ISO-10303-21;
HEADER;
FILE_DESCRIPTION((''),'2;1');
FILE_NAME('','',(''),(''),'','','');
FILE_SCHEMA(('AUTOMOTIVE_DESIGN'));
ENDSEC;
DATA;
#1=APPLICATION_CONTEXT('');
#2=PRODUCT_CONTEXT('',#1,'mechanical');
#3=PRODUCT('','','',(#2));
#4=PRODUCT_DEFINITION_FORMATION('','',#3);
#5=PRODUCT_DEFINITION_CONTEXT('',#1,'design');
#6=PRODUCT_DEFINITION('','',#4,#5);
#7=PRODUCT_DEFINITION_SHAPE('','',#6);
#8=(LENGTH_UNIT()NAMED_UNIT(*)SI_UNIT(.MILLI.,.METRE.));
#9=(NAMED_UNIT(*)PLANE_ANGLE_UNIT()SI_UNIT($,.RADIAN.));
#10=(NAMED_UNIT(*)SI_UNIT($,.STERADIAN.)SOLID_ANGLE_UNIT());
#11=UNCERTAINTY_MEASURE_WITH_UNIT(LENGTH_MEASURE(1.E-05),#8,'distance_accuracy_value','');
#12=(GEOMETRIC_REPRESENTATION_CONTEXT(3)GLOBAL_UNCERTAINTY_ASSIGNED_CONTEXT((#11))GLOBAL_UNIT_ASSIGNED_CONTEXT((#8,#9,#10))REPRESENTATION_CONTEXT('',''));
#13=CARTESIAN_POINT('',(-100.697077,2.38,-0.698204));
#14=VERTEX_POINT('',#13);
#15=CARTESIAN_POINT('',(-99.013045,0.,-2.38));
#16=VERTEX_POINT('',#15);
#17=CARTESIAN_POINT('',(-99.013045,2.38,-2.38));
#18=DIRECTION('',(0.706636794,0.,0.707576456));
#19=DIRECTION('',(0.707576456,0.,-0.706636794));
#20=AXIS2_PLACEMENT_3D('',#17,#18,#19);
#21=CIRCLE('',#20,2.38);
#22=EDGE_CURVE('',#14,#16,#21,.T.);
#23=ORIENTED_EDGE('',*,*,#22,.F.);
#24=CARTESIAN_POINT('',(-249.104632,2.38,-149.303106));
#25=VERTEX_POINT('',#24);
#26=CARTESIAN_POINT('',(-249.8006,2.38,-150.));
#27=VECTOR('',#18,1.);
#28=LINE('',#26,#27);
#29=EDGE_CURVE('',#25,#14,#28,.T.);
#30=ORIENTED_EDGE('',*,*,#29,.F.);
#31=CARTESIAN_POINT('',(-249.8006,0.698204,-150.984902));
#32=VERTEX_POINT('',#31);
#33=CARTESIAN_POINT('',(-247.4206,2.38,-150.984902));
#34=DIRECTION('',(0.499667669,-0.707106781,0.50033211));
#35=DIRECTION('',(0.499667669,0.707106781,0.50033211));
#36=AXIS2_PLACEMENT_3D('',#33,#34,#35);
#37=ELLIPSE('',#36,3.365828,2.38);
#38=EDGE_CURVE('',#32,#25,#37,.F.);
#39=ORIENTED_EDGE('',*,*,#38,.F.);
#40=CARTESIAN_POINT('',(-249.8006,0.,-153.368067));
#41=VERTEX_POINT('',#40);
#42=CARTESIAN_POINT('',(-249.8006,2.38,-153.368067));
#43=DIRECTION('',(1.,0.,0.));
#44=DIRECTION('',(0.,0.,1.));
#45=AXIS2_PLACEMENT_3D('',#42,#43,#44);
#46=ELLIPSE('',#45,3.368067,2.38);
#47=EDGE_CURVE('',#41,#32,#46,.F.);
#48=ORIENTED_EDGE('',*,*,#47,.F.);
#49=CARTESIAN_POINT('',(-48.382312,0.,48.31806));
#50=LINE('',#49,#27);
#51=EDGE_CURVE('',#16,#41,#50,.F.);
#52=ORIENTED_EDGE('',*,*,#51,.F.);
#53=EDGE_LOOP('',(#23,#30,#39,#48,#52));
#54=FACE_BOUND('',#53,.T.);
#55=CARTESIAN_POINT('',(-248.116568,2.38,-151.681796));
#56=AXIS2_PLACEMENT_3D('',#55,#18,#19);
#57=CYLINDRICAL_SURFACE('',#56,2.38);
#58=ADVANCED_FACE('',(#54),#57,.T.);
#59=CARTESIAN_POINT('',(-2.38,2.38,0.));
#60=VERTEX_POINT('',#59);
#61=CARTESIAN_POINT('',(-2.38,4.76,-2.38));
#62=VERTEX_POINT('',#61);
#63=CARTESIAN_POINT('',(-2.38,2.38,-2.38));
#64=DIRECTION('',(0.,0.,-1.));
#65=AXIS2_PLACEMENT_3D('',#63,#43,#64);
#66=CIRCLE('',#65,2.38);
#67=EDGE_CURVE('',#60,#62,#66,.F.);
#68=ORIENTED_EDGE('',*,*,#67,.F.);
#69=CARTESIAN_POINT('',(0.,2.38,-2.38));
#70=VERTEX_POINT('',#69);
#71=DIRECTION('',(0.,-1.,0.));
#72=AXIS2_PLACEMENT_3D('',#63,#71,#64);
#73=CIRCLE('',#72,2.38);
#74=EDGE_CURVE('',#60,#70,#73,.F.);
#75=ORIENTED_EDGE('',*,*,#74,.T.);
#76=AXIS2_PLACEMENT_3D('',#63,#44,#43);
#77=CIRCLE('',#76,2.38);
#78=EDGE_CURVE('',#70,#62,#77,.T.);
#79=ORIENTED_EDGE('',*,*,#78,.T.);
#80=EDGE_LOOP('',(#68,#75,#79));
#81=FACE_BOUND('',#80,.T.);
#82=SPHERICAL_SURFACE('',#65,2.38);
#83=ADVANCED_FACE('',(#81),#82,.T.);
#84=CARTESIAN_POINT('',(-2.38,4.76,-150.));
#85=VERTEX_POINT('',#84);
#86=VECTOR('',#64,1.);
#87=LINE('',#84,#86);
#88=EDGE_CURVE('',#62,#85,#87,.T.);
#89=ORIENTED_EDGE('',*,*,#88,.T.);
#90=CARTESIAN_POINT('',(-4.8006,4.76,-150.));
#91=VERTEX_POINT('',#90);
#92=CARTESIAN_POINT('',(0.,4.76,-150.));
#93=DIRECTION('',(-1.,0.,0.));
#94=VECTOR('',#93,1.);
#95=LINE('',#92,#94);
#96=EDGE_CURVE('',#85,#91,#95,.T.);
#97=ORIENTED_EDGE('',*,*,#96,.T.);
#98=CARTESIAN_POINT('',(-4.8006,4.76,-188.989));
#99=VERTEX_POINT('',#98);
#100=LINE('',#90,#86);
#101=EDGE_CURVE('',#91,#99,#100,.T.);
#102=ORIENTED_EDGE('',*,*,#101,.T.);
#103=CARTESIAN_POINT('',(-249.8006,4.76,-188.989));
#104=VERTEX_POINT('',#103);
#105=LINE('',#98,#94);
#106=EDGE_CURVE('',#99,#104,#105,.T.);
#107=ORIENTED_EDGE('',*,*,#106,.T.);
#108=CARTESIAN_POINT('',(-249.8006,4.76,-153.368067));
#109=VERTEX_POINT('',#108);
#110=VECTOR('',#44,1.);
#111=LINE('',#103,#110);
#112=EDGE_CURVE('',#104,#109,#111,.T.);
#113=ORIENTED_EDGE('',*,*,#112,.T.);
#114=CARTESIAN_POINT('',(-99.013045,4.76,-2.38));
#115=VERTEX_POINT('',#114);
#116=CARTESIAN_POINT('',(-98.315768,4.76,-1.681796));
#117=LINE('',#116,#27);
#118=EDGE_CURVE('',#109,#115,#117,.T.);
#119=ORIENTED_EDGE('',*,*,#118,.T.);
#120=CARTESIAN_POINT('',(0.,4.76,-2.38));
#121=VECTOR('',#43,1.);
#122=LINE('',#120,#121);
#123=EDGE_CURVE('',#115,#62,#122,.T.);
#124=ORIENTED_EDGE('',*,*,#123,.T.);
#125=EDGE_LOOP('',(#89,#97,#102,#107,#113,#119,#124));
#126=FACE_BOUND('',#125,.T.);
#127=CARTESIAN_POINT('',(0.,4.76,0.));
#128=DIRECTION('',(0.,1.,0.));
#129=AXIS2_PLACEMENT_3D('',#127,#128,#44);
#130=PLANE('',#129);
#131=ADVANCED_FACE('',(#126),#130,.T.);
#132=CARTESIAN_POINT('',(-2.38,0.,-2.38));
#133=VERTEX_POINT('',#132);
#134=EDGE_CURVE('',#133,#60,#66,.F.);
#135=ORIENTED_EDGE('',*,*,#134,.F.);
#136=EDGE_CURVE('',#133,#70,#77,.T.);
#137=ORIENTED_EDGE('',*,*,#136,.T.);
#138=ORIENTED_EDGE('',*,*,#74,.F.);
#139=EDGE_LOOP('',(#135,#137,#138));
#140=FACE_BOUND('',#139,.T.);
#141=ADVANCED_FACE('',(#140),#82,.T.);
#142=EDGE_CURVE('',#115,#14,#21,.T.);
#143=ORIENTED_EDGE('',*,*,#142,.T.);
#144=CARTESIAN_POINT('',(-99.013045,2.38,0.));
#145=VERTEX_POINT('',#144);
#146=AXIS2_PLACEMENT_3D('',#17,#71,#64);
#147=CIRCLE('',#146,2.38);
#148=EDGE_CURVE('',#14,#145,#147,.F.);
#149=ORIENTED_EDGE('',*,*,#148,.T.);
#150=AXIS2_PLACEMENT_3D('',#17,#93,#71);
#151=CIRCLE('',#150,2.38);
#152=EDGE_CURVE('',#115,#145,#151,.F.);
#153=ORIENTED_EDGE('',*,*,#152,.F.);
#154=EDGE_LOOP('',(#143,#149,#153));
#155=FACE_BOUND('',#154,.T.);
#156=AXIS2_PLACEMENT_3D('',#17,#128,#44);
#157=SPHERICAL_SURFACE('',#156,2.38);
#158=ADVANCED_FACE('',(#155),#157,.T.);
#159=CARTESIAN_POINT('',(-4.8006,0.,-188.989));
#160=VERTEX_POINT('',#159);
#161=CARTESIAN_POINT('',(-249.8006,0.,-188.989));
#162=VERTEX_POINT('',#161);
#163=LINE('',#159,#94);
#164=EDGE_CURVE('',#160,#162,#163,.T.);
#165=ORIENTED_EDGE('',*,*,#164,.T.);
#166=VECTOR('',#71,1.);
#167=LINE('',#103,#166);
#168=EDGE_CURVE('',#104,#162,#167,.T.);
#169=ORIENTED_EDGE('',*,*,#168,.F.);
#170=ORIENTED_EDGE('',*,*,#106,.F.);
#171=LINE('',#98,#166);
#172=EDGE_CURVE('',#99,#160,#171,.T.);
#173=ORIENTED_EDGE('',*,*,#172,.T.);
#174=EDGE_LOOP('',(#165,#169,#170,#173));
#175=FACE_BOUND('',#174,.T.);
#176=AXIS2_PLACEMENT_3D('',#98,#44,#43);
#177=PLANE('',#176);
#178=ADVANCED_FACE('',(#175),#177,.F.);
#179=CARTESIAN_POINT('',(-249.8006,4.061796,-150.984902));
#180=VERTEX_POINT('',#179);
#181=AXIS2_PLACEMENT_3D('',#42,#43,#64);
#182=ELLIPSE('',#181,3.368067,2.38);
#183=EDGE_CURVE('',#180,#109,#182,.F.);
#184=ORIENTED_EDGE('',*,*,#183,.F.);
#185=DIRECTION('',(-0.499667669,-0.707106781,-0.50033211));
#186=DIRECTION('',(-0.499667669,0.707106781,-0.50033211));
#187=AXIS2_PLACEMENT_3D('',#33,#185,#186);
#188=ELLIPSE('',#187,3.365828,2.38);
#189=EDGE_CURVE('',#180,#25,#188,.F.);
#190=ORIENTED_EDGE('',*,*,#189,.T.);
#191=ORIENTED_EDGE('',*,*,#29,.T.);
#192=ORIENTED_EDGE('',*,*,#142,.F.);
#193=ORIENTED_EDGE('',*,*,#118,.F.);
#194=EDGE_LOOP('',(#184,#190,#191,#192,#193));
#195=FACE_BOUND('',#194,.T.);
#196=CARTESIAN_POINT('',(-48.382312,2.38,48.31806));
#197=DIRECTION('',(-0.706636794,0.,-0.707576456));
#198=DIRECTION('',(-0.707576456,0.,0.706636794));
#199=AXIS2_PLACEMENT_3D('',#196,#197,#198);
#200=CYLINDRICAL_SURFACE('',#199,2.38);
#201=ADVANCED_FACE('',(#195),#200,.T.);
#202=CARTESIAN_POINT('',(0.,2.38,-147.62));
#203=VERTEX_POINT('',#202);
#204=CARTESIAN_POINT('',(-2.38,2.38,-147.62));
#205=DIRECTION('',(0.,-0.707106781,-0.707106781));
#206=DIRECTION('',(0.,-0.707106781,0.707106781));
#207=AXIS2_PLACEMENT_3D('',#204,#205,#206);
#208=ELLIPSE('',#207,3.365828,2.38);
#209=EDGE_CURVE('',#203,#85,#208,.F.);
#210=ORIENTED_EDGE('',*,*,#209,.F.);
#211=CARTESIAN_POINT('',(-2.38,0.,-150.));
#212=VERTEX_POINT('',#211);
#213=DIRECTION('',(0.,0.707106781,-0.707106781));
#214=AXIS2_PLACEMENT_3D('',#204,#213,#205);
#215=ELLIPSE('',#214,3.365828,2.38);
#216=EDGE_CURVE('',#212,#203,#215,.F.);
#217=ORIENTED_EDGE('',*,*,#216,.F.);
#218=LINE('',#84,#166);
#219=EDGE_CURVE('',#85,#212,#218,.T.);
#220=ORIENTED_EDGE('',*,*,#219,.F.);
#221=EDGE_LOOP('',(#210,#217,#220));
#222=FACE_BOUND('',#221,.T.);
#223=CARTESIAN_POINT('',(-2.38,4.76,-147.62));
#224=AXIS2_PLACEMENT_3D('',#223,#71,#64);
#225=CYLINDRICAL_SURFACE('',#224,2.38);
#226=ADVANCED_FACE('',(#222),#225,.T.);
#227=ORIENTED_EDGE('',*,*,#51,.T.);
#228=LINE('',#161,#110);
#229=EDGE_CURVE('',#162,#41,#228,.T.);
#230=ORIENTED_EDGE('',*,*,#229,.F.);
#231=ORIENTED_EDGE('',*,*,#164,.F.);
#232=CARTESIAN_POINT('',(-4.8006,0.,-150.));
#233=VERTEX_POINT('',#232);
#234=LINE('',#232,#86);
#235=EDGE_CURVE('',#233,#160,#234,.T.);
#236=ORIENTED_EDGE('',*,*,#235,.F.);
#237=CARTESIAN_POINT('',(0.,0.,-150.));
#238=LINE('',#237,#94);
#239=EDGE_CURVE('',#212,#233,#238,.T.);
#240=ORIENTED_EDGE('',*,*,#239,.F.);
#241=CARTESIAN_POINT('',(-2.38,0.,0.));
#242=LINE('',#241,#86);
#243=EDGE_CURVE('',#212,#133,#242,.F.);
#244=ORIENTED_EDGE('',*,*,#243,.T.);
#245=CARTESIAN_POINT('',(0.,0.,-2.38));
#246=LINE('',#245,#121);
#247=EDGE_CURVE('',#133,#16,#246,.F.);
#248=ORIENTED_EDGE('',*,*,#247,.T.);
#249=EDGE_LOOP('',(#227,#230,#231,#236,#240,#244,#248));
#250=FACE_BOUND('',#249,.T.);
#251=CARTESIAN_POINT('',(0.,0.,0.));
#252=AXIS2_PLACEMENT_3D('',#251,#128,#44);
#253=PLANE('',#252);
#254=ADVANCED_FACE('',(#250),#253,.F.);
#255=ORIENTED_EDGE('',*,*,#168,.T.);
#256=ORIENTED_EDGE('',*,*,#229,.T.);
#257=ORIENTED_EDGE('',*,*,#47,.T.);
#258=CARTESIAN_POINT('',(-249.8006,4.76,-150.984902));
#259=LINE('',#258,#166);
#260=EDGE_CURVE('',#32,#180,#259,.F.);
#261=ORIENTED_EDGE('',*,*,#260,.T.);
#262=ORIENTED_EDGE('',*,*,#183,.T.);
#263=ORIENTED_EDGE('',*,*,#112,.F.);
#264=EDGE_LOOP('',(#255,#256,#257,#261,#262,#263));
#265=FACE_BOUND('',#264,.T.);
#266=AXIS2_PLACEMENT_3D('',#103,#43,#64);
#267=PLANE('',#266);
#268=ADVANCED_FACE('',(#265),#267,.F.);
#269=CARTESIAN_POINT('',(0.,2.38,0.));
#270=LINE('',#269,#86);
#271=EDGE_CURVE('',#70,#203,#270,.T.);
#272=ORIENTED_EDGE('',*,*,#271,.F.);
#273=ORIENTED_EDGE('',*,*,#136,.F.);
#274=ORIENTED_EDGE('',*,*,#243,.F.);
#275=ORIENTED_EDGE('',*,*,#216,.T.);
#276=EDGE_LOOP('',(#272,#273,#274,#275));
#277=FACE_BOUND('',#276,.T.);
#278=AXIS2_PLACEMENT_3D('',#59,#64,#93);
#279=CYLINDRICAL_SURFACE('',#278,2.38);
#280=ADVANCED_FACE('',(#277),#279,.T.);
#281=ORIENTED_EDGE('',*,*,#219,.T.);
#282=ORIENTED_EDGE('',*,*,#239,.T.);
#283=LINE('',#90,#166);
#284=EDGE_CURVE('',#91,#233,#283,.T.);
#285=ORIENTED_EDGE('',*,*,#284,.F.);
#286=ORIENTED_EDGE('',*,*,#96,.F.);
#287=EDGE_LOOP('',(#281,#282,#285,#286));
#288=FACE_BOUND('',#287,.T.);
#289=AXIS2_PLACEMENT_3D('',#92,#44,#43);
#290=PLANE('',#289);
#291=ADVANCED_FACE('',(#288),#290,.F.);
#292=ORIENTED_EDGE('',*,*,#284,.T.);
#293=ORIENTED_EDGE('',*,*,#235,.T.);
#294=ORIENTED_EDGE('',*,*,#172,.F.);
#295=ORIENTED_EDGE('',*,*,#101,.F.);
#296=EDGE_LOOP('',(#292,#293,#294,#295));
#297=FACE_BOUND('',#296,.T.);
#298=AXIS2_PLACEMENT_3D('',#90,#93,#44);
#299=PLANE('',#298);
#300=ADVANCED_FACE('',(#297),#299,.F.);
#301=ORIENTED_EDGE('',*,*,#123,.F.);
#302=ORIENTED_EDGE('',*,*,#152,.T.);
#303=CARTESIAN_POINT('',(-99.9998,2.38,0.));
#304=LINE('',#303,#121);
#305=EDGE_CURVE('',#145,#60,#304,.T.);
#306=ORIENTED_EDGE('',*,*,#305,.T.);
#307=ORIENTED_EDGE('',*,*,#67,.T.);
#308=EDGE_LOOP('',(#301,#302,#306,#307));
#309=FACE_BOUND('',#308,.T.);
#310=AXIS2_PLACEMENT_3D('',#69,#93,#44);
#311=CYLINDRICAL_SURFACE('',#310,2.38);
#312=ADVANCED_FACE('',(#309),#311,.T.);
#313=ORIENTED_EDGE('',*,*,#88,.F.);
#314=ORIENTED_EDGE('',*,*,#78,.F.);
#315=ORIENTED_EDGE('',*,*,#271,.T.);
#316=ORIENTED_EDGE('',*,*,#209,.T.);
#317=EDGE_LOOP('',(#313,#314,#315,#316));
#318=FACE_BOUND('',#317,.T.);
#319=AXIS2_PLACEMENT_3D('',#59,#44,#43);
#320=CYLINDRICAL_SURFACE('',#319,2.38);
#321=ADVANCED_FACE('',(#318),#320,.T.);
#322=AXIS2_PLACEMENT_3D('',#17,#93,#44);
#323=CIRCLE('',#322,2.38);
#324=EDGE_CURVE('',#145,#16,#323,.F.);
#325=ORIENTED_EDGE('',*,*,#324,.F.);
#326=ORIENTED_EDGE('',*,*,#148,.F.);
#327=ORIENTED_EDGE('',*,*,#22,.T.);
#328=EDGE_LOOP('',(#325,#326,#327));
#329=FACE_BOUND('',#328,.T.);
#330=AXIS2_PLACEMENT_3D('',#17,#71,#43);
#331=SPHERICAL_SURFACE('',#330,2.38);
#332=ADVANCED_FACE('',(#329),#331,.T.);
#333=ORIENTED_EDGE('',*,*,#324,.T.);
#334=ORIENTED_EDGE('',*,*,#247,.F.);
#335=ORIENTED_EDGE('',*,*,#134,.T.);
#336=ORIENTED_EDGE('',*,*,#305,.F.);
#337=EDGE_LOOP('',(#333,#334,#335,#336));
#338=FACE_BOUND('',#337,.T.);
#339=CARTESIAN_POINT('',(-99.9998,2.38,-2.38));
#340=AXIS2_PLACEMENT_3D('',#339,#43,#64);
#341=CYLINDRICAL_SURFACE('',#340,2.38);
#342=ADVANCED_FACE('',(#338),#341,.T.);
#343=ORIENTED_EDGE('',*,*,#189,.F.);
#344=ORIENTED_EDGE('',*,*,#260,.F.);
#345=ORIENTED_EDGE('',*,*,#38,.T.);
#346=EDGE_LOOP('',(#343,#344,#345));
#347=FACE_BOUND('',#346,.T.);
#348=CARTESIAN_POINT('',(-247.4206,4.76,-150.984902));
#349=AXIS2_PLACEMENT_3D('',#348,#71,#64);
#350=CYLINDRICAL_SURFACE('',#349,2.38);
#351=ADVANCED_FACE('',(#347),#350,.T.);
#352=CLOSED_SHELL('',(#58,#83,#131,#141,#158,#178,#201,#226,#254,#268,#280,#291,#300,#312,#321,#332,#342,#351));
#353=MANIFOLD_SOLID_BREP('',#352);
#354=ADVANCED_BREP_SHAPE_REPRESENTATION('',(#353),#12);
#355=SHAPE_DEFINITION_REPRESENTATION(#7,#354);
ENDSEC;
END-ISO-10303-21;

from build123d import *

# Parameters (mm, degrees)
BOSS_EXTRUDE2_DEPTH = 4.76
FILLET11_R          = 2.38


with BuildPart() as part:
    # Sketch1 → Boss-Extrude2 (new body)
    with BuildSketch(Plane(origin=(0, 0, 0), x_dir=(1, 0, 0), z_dir=(0, 1, 0))):
        Polygon((0, 0), (0, 150), (-4.8006, 150), (-4.8006, 188.989), (-249.8006, 188.989), (-249.8006, 150), (-99.9998, 0), align=None)
    extrude(amount=BOSS_EXTRUDE2_DEPTH)

    # Fillet11
    fillet11_edges = [part.edges().sort_by_distance(p)[0] for p in [
        (-49.9999, 0, 0),
        (-99.9998, 2.38, 0),
        (-249.8006, 2.38, -150),
        (0, 2.38, -150),
        (0, 2.38, 0),
        (-174.9002, 4.76, -75),
        (-49.9999, 4.76, 0),
        (-174.9002, 0, -75),
        (0, 4.76, -75),
        (0, 0, -75),
    ]]
    fillet(fillet11_edges, radius=FILLET11_R - 0.0001)  # a hair under: the kernel refuses the full size


solid = part.part
